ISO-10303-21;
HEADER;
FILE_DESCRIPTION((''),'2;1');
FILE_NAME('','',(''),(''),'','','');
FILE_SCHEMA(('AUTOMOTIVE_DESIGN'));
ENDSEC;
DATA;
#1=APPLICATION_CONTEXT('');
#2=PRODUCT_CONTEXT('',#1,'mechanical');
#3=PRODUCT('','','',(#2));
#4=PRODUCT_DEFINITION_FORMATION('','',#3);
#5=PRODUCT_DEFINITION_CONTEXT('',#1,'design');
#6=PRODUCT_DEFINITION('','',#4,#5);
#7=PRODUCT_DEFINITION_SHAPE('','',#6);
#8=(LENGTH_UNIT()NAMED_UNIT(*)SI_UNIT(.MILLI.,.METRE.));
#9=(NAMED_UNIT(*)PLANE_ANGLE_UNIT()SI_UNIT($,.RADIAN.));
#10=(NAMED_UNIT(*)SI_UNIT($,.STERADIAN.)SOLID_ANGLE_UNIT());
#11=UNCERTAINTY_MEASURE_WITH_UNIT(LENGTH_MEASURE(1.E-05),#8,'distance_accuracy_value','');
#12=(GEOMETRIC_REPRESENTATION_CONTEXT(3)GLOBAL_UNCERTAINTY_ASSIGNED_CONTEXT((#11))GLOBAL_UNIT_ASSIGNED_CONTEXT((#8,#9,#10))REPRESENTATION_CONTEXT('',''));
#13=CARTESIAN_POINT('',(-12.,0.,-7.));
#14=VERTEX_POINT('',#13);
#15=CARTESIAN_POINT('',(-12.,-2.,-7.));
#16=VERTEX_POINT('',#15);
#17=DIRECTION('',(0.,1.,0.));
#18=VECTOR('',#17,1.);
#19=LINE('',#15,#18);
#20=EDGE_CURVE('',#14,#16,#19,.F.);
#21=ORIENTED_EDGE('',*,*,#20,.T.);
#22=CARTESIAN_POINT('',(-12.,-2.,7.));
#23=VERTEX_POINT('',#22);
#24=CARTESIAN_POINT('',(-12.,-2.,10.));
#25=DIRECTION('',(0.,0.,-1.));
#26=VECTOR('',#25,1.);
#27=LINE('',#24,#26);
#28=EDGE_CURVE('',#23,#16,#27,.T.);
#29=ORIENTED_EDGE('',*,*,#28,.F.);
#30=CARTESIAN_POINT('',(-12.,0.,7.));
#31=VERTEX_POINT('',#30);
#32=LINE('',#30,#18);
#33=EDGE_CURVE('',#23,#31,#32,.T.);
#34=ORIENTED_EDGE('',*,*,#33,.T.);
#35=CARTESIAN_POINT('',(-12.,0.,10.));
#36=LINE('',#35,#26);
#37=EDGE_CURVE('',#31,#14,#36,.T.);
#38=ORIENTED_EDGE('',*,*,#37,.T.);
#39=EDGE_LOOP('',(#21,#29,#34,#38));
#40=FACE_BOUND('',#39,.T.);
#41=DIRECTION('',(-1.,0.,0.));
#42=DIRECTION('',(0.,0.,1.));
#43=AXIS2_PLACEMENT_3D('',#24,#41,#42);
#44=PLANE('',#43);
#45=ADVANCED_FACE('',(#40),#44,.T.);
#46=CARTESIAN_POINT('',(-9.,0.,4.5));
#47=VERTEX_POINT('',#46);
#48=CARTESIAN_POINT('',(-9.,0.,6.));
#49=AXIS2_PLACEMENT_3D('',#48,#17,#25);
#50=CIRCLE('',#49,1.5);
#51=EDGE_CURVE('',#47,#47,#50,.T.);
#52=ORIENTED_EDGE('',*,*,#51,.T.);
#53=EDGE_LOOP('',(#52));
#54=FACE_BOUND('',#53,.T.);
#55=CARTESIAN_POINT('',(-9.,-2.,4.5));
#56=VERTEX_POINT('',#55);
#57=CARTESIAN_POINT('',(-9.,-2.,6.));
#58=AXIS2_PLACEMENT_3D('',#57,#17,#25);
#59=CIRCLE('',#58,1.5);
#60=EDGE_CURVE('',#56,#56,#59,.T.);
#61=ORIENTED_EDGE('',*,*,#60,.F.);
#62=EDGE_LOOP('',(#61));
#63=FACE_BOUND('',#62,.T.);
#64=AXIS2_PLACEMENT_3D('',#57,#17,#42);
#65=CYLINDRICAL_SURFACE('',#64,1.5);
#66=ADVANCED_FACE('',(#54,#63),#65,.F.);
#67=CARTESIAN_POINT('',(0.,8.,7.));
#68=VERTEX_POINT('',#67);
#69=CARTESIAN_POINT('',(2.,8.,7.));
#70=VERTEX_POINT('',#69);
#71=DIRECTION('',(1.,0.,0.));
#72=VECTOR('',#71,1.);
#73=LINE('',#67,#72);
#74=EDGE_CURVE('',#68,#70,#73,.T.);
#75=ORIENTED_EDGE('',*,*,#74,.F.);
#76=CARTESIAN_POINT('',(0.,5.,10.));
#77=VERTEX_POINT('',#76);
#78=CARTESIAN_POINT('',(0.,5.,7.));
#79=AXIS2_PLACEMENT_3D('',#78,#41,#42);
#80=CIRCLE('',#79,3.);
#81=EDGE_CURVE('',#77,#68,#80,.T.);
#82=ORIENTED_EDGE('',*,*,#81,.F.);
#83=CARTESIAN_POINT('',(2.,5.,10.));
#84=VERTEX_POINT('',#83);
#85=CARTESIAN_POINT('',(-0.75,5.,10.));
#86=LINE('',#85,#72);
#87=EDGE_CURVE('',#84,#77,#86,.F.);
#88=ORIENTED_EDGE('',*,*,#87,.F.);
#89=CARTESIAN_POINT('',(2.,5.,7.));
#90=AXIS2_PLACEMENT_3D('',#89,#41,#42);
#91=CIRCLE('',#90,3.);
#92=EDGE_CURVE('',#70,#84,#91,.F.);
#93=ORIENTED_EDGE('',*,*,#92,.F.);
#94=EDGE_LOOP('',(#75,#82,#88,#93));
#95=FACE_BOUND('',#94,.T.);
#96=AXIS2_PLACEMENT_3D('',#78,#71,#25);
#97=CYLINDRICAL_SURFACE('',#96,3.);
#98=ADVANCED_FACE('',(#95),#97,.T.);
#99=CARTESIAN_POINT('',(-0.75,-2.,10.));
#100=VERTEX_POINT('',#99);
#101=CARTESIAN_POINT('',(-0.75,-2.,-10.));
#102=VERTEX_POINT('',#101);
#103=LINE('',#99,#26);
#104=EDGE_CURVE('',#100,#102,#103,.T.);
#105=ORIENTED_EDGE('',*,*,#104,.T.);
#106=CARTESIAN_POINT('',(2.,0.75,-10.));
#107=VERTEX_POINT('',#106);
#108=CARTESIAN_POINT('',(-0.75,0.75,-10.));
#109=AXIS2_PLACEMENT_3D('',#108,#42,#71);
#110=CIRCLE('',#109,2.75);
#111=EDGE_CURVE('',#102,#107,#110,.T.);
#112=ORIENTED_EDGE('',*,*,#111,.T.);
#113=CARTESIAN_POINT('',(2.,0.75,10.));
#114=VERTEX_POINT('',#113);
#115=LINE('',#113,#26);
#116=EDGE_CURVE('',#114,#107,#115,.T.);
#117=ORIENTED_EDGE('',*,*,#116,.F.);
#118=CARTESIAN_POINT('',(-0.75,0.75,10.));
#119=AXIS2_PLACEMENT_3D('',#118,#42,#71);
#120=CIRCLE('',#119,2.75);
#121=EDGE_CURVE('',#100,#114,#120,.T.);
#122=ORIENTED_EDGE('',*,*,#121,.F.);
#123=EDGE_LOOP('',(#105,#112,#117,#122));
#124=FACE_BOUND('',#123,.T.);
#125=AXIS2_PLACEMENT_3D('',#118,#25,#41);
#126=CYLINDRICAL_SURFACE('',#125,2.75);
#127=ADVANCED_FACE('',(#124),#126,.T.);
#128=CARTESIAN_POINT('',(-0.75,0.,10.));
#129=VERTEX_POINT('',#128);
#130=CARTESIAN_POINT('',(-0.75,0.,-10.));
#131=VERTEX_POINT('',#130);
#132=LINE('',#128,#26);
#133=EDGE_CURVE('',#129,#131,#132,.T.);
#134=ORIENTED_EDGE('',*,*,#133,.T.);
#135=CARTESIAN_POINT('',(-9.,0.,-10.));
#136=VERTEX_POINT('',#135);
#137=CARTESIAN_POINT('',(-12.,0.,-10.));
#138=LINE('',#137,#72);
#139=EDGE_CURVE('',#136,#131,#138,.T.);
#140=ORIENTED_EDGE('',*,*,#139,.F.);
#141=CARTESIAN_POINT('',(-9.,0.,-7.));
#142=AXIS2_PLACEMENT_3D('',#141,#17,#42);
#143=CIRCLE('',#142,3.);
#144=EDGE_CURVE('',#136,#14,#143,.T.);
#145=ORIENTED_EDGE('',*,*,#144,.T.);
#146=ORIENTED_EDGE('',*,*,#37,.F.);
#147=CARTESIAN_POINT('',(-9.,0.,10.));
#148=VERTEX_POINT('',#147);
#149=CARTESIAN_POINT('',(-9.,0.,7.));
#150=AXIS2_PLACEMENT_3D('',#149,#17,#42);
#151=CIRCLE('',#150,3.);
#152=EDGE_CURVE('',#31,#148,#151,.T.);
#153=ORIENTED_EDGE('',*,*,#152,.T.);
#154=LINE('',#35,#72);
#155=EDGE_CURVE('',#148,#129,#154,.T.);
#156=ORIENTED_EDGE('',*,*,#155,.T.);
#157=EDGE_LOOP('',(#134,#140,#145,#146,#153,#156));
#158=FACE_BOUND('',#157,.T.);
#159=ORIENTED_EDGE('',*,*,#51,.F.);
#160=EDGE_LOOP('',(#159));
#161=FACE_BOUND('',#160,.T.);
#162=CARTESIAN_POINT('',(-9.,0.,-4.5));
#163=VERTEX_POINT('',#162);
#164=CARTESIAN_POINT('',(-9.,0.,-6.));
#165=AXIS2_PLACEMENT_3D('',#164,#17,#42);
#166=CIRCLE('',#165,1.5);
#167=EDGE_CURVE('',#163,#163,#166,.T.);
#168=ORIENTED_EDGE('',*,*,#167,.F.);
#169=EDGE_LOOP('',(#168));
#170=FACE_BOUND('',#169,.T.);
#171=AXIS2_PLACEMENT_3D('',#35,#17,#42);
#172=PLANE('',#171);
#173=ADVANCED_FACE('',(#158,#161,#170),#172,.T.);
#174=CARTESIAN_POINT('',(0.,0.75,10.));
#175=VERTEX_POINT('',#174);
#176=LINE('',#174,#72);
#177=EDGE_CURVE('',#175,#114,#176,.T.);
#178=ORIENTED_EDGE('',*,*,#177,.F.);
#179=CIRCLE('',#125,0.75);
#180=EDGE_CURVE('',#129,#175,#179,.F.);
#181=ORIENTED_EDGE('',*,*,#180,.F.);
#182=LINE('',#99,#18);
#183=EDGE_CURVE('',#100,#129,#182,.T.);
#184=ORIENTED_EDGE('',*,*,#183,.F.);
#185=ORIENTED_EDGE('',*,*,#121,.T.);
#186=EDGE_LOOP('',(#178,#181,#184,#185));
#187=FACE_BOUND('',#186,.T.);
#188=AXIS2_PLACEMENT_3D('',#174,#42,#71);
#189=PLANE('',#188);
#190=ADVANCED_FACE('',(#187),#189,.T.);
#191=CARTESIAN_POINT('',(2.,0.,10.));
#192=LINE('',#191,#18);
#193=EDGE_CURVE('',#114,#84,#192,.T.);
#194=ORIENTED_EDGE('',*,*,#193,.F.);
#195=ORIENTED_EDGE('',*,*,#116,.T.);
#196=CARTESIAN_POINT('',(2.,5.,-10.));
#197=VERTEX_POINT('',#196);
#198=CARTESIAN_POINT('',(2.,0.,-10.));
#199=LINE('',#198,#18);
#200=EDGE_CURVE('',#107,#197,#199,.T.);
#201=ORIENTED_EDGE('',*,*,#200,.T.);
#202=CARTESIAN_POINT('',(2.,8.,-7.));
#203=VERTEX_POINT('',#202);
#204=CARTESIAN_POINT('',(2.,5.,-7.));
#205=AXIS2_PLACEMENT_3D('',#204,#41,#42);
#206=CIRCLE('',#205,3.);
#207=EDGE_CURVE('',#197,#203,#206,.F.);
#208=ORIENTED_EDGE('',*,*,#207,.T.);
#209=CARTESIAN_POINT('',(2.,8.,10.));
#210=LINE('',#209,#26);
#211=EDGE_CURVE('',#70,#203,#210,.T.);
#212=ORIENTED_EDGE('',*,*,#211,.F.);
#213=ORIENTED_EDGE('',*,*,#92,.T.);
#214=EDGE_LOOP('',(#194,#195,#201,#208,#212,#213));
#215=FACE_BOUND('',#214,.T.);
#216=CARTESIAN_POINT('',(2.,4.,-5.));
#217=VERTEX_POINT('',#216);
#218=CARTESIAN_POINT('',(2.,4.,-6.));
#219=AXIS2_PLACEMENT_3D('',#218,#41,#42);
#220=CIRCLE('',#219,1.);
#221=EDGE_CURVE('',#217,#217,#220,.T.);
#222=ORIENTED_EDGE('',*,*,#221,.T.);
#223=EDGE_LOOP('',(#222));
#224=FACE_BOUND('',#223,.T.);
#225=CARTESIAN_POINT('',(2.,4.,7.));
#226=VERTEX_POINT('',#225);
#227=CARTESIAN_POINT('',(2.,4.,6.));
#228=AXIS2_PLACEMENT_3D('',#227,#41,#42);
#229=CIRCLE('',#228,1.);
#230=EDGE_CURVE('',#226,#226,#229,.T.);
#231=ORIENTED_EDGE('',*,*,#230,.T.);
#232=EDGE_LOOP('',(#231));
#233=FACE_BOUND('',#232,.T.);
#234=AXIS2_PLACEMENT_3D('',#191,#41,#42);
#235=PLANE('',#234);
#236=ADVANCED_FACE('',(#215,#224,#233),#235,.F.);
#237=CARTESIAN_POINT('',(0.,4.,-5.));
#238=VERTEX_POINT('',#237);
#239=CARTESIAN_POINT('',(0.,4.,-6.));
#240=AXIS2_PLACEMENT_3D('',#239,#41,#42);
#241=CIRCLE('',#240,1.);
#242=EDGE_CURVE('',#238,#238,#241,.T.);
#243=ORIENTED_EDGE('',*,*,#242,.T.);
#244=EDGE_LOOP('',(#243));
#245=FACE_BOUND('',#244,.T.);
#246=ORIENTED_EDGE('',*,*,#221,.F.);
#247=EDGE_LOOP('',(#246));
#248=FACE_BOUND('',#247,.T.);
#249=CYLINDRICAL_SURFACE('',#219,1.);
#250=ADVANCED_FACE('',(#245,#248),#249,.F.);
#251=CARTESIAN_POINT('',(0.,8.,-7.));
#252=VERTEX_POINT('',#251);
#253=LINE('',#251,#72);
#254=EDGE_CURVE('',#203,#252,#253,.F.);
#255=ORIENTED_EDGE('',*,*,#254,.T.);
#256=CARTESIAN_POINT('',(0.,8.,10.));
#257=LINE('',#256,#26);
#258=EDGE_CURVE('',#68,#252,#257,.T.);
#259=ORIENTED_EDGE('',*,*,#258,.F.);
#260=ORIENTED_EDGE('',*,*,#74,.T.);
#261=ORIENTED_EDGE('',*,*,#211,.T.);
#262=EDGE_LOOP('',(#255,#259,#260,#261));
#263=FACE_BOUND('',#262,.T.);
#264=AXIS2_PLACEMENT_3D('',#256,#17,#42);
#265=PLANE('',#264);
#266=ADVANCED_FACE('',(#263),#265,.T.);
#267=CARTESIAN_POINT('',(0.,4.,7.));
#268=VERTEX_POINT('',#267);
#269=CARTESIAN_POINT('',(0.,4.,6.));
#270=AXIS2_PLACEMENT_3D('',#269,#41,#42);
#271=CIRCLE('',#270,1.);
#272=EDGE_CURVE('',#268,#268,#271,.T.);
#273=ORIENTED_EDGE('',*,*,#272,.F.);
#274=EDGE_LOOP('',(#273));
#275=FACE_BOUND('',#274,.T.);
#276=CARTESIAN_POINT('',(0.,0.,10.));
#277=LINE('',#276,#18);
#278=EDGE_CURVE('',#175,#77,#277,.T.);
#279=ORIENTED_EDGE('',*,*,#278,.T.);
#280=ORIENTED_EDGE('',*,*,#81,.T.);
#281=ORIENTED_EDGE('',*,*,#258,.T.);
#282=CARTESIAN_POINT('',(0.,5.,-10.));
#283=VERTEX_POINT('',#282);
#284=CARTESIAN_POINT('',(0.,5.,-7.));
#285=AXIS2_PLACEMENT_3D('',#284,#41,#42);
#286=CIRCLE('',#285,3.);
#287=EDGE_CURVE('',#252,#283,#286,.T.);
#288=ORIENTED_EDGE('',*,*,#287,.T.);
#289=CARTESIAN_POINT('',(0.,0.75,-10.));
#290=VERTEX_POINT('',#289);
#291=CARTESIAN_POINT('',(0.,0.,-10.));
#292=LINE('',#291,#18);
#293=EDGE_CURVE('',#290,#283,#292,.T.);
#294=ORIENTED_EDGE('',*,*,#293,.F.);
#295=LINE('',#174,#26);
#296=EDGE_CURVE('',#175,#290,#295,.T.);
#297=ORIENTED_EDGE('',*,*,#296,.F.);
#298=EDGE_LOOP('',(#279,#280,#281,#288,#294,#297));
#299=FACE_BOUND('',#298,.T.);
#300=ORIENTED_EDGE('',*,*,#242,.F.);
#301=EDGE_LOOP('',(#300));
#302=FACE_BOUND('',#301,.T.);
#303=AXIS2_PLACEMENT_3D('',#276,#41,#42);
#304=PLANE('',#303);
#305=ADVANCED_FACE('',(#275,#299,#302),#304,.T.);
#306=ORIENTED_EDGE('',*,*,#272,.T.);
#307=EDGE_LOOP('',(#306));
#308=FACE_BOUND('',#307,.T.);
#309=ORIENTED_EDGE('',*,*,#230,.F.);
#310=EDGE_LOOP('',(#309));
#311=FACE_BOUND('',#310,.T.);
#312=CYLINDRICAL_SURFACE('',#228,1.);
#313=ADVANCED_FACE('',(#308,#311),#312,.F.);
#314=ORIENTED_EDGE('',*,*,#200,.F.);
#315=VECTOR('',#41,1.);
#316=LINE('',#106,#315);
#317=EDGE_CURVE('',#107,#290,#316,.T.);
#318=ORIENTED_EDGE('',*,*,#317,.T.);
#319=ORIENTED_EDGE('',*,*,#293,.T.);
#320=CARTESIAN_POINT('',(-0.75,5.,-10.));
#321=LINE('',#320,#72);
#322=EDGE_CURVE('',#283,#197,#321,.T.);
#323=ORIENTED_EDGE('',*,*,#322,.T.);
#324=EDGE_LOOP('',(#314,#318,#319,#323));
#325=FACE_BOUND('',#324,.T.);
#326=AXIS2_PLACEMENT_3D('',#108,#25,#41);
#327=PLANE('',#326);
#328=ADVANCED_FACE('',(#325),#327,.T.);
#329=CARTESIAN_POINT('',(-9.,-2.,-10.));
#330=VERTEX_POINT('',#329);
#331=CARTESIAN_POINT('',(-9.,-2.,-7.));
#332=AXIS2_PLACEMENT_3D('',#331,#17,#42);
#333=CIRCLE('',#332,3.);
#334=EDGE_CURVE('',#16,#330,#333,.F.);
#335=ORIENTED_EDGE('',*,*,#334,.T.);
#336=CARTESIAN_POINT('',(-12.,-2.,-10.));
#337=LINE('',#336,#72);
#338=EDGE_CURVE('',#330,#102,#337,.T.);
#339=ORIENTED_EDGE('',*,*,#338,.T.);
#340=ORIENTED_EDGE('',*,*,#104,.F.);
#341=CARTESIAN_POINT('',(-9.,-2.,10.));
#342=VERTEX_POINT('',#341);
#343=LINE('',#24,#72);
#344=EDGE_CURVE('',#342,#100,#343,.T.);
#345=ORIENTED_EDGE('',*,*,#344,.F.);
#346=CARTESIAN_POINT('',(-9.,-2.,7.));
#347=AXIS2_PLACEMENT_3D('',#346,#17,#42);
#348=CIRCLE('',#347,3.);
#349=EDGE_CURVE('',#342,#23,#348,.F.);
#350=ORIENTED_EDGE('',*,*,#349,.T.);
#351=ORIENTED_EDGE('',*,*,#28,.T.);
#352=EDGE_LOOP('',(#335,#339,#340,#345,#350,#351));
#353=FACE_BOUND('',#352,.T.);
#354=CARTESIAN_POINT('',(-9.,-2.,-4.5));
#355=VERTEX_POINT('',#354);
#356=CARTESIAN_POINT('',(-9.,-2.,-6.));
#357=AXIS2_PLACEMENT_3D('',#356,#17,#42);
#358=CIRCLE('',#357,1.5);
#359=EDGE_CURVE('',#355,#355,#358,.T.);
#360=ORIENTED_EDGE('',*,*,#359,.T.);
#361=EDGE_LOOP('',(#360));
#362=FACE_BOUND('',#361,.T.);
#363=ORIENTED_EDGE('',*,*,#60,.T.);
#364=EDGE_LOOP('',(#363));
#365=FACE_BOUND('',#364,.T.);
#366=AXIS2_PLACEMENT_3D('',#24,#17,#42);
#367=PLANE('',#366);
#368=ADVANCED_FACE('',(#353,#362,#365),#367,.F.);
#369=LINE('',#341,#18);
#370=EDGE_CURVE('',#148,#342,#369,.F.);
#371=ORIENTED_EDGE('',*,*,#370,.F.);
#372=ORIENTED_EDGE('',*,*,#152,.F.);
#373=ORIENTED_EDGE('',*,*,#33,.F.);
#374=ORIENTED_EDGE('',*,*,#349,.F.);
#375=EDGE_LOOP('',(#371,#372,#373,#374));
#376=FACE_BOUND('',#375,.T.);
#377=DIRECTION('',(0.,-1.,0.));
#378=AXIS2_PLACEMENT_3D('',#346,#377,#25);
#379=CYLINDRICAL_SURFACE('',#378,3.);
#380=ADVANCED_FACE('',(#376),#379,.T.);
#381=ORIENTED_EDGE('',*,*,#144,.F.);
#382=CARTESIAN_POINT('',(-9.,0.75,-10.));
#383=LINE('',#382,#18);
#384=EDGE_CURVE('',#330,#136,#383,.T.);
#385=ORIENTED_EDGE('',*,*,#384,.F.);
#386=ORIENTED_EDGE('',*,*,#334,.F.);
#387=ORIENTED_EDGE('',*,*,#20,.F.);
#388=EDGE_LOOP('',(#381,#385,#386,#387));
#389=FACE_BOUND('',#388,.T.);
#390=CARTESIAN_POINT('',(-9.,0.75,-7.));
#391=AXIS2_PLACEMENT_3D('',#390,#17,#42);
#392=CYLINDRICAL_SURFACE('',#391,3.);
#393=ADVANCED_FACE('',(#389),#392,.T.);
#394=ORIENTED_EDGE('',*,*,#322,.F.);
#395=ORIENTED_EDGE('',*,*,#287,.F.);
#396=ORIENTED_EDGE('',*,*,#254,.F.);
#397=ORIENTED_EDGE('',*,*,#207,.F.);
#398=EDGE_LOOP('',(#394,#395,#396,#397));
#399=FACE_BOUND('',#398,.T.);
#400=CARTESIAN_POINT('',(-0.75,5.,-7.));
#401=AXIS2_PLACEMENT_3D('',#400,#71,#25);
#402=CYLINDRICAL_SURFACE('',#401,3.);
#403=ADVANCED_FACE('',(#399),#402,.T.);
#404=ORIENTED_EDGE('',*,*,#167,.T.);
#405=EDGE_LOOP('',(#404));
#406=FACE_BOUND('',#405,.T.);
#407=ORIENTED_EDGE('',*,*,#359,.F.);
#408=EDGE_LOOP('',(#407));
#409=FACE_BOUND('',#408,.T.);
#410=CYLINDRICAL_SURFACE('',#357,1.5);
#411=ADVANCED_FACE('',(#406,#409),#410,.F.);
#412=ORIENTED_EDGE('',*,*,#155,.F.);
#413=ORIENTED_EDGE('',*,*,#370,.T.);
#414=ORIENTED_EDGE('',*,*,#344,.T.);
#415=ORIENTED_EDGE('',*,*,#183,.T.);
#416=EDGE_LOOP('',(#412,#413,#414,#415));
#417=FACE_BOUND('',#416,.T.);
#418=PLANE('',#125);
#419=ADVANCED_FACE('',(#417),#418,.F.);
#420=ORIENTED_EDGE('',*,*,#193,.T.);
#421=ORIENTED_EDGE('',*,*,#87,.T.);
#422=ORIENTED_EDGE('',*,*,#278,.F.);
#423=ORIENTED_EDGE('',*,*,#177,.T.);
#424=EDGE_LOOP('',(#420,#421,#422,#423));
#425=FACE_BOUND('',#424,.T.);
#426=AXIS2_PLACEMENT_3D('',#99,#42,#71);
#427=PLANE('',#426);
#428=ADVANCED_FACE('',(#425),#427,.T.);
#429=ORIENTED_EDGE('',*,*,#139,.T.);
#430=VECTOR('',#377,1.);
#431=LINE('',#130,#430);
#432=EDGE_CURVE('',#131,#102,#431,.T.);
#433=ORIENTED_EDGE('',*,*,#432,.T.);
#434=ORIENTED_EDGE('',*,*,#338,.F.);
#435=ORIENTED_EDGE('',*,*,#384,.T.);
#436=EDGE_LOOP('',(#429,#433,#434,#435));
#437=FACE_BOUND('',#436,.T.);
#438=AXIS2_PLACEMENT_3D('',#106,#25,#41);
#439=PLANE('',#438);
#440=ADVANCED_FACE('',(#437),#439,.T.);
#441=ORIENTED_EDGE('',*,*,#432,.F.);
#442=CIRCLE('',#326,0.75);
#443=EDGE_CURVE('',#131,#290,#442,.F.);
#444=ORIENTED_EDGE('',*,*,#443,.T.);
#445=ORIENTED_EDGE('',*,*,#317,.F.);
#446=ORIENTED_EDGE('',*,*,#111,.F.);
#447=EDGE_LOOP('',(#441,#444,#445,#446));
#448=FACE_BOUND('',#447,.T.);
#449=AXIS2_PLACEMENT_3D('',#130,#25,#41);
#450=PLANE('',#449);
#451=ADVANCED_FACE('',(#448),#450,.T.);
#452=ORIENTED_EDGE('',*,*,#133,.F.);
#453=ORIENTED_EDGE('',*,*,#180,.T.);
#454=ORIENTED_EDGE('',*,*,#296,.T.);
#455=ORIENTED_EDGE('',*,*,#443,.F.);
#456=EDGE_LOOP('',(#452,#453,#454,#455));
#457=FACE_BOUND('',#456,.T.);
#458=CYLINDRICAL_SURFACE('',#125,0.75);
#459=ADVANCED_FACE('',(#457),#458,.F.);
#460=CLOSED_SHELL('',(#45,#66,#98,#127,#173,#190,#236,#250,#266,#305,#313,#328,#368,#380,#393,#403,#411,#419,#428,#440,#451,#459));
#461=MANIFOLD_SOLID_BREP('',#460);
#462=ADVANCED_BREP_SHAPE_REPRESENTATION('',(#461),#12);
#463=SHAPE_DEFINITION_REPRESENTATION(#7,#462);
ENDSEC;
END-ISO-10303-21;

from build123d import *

# Parameters (mm, degrees)
BASE_FLANGE1_DEPTH = 10
FILLET1_R          = 3
SKETCH6_R          = 1.5
CUT_EXTRUDE1_DEPTH = 18.549928775
SKETCH11_R         = 1
CUT_EXTRUDE2_DEPTH = 2


# Sheet-metal steps are written as plain solids
with BuildPart() as part:
    # Sketch1 → Base-Flange1 (new, symmetric)
    with BuildSketch(Plane.XY):
        with BuildLine():
            Line((-12, 0), (-0.75, 0))
            ThreePointArc((-0.75, 0), (-0.219669914, 0.219669914), (0, 0.75))
            Line((0, 0.75), (0, 8))
            Line((0, 8), (2, 8))
            Line((2, 8), (2, 0.75))
            ThreePointArc((2, 0.75), (1.194543648, -1.194543648), (-0.75, -2))
            Line((-0.75, -2), (-12, -2))
            Line((-12, -2), (-12, 0))
        make_face()
    extrude(amount=BASE_FLANGE1_DEPTH, both=True)

    # Fillet1
    fillet1_edges = [part.edges().sort_by_distance(p)[0] for p in [
        (-12, -1, 10),
        (-12, -1, -10),
        (1, 8, 10),
        (1, 8, -10),
    ]]
    fillet(fillet1_edges, radius=FILLET1_R)

    # Sketch6 → Cut-Extrude1 (cut, through all)
    with BuildSketch(Plane(origin=(0, 0, 0), x_dir=(1, 0, 0), z_dir=(0, 1, 0))):
        with Locations(Location((-9, 6, 0), (0, 0, 270))):
            Circle(SKETCH6_R)
        with Locations(Location((-9, -6, 0), (0, 0, 90))):
            Circle(SKETCH6_R)
    extrude(amount=-CUT_EXTRUDE1_DEPTH, mode=Mode.SUBTRACT)

    # Sketch11 → Cut-Extrude2 (cut)
    with BuildSketch(Plane.ZY):
        with Locations((6, 4)):
            Circle(SKETCH11_R)
        with Locations((-6, 4)):
            Circle(SKETCH11_R)
    extrude(amount=-CUT_EXTRUDE2_DEPTH, mode=Mode.SUBTRACT)


solid = part.part
